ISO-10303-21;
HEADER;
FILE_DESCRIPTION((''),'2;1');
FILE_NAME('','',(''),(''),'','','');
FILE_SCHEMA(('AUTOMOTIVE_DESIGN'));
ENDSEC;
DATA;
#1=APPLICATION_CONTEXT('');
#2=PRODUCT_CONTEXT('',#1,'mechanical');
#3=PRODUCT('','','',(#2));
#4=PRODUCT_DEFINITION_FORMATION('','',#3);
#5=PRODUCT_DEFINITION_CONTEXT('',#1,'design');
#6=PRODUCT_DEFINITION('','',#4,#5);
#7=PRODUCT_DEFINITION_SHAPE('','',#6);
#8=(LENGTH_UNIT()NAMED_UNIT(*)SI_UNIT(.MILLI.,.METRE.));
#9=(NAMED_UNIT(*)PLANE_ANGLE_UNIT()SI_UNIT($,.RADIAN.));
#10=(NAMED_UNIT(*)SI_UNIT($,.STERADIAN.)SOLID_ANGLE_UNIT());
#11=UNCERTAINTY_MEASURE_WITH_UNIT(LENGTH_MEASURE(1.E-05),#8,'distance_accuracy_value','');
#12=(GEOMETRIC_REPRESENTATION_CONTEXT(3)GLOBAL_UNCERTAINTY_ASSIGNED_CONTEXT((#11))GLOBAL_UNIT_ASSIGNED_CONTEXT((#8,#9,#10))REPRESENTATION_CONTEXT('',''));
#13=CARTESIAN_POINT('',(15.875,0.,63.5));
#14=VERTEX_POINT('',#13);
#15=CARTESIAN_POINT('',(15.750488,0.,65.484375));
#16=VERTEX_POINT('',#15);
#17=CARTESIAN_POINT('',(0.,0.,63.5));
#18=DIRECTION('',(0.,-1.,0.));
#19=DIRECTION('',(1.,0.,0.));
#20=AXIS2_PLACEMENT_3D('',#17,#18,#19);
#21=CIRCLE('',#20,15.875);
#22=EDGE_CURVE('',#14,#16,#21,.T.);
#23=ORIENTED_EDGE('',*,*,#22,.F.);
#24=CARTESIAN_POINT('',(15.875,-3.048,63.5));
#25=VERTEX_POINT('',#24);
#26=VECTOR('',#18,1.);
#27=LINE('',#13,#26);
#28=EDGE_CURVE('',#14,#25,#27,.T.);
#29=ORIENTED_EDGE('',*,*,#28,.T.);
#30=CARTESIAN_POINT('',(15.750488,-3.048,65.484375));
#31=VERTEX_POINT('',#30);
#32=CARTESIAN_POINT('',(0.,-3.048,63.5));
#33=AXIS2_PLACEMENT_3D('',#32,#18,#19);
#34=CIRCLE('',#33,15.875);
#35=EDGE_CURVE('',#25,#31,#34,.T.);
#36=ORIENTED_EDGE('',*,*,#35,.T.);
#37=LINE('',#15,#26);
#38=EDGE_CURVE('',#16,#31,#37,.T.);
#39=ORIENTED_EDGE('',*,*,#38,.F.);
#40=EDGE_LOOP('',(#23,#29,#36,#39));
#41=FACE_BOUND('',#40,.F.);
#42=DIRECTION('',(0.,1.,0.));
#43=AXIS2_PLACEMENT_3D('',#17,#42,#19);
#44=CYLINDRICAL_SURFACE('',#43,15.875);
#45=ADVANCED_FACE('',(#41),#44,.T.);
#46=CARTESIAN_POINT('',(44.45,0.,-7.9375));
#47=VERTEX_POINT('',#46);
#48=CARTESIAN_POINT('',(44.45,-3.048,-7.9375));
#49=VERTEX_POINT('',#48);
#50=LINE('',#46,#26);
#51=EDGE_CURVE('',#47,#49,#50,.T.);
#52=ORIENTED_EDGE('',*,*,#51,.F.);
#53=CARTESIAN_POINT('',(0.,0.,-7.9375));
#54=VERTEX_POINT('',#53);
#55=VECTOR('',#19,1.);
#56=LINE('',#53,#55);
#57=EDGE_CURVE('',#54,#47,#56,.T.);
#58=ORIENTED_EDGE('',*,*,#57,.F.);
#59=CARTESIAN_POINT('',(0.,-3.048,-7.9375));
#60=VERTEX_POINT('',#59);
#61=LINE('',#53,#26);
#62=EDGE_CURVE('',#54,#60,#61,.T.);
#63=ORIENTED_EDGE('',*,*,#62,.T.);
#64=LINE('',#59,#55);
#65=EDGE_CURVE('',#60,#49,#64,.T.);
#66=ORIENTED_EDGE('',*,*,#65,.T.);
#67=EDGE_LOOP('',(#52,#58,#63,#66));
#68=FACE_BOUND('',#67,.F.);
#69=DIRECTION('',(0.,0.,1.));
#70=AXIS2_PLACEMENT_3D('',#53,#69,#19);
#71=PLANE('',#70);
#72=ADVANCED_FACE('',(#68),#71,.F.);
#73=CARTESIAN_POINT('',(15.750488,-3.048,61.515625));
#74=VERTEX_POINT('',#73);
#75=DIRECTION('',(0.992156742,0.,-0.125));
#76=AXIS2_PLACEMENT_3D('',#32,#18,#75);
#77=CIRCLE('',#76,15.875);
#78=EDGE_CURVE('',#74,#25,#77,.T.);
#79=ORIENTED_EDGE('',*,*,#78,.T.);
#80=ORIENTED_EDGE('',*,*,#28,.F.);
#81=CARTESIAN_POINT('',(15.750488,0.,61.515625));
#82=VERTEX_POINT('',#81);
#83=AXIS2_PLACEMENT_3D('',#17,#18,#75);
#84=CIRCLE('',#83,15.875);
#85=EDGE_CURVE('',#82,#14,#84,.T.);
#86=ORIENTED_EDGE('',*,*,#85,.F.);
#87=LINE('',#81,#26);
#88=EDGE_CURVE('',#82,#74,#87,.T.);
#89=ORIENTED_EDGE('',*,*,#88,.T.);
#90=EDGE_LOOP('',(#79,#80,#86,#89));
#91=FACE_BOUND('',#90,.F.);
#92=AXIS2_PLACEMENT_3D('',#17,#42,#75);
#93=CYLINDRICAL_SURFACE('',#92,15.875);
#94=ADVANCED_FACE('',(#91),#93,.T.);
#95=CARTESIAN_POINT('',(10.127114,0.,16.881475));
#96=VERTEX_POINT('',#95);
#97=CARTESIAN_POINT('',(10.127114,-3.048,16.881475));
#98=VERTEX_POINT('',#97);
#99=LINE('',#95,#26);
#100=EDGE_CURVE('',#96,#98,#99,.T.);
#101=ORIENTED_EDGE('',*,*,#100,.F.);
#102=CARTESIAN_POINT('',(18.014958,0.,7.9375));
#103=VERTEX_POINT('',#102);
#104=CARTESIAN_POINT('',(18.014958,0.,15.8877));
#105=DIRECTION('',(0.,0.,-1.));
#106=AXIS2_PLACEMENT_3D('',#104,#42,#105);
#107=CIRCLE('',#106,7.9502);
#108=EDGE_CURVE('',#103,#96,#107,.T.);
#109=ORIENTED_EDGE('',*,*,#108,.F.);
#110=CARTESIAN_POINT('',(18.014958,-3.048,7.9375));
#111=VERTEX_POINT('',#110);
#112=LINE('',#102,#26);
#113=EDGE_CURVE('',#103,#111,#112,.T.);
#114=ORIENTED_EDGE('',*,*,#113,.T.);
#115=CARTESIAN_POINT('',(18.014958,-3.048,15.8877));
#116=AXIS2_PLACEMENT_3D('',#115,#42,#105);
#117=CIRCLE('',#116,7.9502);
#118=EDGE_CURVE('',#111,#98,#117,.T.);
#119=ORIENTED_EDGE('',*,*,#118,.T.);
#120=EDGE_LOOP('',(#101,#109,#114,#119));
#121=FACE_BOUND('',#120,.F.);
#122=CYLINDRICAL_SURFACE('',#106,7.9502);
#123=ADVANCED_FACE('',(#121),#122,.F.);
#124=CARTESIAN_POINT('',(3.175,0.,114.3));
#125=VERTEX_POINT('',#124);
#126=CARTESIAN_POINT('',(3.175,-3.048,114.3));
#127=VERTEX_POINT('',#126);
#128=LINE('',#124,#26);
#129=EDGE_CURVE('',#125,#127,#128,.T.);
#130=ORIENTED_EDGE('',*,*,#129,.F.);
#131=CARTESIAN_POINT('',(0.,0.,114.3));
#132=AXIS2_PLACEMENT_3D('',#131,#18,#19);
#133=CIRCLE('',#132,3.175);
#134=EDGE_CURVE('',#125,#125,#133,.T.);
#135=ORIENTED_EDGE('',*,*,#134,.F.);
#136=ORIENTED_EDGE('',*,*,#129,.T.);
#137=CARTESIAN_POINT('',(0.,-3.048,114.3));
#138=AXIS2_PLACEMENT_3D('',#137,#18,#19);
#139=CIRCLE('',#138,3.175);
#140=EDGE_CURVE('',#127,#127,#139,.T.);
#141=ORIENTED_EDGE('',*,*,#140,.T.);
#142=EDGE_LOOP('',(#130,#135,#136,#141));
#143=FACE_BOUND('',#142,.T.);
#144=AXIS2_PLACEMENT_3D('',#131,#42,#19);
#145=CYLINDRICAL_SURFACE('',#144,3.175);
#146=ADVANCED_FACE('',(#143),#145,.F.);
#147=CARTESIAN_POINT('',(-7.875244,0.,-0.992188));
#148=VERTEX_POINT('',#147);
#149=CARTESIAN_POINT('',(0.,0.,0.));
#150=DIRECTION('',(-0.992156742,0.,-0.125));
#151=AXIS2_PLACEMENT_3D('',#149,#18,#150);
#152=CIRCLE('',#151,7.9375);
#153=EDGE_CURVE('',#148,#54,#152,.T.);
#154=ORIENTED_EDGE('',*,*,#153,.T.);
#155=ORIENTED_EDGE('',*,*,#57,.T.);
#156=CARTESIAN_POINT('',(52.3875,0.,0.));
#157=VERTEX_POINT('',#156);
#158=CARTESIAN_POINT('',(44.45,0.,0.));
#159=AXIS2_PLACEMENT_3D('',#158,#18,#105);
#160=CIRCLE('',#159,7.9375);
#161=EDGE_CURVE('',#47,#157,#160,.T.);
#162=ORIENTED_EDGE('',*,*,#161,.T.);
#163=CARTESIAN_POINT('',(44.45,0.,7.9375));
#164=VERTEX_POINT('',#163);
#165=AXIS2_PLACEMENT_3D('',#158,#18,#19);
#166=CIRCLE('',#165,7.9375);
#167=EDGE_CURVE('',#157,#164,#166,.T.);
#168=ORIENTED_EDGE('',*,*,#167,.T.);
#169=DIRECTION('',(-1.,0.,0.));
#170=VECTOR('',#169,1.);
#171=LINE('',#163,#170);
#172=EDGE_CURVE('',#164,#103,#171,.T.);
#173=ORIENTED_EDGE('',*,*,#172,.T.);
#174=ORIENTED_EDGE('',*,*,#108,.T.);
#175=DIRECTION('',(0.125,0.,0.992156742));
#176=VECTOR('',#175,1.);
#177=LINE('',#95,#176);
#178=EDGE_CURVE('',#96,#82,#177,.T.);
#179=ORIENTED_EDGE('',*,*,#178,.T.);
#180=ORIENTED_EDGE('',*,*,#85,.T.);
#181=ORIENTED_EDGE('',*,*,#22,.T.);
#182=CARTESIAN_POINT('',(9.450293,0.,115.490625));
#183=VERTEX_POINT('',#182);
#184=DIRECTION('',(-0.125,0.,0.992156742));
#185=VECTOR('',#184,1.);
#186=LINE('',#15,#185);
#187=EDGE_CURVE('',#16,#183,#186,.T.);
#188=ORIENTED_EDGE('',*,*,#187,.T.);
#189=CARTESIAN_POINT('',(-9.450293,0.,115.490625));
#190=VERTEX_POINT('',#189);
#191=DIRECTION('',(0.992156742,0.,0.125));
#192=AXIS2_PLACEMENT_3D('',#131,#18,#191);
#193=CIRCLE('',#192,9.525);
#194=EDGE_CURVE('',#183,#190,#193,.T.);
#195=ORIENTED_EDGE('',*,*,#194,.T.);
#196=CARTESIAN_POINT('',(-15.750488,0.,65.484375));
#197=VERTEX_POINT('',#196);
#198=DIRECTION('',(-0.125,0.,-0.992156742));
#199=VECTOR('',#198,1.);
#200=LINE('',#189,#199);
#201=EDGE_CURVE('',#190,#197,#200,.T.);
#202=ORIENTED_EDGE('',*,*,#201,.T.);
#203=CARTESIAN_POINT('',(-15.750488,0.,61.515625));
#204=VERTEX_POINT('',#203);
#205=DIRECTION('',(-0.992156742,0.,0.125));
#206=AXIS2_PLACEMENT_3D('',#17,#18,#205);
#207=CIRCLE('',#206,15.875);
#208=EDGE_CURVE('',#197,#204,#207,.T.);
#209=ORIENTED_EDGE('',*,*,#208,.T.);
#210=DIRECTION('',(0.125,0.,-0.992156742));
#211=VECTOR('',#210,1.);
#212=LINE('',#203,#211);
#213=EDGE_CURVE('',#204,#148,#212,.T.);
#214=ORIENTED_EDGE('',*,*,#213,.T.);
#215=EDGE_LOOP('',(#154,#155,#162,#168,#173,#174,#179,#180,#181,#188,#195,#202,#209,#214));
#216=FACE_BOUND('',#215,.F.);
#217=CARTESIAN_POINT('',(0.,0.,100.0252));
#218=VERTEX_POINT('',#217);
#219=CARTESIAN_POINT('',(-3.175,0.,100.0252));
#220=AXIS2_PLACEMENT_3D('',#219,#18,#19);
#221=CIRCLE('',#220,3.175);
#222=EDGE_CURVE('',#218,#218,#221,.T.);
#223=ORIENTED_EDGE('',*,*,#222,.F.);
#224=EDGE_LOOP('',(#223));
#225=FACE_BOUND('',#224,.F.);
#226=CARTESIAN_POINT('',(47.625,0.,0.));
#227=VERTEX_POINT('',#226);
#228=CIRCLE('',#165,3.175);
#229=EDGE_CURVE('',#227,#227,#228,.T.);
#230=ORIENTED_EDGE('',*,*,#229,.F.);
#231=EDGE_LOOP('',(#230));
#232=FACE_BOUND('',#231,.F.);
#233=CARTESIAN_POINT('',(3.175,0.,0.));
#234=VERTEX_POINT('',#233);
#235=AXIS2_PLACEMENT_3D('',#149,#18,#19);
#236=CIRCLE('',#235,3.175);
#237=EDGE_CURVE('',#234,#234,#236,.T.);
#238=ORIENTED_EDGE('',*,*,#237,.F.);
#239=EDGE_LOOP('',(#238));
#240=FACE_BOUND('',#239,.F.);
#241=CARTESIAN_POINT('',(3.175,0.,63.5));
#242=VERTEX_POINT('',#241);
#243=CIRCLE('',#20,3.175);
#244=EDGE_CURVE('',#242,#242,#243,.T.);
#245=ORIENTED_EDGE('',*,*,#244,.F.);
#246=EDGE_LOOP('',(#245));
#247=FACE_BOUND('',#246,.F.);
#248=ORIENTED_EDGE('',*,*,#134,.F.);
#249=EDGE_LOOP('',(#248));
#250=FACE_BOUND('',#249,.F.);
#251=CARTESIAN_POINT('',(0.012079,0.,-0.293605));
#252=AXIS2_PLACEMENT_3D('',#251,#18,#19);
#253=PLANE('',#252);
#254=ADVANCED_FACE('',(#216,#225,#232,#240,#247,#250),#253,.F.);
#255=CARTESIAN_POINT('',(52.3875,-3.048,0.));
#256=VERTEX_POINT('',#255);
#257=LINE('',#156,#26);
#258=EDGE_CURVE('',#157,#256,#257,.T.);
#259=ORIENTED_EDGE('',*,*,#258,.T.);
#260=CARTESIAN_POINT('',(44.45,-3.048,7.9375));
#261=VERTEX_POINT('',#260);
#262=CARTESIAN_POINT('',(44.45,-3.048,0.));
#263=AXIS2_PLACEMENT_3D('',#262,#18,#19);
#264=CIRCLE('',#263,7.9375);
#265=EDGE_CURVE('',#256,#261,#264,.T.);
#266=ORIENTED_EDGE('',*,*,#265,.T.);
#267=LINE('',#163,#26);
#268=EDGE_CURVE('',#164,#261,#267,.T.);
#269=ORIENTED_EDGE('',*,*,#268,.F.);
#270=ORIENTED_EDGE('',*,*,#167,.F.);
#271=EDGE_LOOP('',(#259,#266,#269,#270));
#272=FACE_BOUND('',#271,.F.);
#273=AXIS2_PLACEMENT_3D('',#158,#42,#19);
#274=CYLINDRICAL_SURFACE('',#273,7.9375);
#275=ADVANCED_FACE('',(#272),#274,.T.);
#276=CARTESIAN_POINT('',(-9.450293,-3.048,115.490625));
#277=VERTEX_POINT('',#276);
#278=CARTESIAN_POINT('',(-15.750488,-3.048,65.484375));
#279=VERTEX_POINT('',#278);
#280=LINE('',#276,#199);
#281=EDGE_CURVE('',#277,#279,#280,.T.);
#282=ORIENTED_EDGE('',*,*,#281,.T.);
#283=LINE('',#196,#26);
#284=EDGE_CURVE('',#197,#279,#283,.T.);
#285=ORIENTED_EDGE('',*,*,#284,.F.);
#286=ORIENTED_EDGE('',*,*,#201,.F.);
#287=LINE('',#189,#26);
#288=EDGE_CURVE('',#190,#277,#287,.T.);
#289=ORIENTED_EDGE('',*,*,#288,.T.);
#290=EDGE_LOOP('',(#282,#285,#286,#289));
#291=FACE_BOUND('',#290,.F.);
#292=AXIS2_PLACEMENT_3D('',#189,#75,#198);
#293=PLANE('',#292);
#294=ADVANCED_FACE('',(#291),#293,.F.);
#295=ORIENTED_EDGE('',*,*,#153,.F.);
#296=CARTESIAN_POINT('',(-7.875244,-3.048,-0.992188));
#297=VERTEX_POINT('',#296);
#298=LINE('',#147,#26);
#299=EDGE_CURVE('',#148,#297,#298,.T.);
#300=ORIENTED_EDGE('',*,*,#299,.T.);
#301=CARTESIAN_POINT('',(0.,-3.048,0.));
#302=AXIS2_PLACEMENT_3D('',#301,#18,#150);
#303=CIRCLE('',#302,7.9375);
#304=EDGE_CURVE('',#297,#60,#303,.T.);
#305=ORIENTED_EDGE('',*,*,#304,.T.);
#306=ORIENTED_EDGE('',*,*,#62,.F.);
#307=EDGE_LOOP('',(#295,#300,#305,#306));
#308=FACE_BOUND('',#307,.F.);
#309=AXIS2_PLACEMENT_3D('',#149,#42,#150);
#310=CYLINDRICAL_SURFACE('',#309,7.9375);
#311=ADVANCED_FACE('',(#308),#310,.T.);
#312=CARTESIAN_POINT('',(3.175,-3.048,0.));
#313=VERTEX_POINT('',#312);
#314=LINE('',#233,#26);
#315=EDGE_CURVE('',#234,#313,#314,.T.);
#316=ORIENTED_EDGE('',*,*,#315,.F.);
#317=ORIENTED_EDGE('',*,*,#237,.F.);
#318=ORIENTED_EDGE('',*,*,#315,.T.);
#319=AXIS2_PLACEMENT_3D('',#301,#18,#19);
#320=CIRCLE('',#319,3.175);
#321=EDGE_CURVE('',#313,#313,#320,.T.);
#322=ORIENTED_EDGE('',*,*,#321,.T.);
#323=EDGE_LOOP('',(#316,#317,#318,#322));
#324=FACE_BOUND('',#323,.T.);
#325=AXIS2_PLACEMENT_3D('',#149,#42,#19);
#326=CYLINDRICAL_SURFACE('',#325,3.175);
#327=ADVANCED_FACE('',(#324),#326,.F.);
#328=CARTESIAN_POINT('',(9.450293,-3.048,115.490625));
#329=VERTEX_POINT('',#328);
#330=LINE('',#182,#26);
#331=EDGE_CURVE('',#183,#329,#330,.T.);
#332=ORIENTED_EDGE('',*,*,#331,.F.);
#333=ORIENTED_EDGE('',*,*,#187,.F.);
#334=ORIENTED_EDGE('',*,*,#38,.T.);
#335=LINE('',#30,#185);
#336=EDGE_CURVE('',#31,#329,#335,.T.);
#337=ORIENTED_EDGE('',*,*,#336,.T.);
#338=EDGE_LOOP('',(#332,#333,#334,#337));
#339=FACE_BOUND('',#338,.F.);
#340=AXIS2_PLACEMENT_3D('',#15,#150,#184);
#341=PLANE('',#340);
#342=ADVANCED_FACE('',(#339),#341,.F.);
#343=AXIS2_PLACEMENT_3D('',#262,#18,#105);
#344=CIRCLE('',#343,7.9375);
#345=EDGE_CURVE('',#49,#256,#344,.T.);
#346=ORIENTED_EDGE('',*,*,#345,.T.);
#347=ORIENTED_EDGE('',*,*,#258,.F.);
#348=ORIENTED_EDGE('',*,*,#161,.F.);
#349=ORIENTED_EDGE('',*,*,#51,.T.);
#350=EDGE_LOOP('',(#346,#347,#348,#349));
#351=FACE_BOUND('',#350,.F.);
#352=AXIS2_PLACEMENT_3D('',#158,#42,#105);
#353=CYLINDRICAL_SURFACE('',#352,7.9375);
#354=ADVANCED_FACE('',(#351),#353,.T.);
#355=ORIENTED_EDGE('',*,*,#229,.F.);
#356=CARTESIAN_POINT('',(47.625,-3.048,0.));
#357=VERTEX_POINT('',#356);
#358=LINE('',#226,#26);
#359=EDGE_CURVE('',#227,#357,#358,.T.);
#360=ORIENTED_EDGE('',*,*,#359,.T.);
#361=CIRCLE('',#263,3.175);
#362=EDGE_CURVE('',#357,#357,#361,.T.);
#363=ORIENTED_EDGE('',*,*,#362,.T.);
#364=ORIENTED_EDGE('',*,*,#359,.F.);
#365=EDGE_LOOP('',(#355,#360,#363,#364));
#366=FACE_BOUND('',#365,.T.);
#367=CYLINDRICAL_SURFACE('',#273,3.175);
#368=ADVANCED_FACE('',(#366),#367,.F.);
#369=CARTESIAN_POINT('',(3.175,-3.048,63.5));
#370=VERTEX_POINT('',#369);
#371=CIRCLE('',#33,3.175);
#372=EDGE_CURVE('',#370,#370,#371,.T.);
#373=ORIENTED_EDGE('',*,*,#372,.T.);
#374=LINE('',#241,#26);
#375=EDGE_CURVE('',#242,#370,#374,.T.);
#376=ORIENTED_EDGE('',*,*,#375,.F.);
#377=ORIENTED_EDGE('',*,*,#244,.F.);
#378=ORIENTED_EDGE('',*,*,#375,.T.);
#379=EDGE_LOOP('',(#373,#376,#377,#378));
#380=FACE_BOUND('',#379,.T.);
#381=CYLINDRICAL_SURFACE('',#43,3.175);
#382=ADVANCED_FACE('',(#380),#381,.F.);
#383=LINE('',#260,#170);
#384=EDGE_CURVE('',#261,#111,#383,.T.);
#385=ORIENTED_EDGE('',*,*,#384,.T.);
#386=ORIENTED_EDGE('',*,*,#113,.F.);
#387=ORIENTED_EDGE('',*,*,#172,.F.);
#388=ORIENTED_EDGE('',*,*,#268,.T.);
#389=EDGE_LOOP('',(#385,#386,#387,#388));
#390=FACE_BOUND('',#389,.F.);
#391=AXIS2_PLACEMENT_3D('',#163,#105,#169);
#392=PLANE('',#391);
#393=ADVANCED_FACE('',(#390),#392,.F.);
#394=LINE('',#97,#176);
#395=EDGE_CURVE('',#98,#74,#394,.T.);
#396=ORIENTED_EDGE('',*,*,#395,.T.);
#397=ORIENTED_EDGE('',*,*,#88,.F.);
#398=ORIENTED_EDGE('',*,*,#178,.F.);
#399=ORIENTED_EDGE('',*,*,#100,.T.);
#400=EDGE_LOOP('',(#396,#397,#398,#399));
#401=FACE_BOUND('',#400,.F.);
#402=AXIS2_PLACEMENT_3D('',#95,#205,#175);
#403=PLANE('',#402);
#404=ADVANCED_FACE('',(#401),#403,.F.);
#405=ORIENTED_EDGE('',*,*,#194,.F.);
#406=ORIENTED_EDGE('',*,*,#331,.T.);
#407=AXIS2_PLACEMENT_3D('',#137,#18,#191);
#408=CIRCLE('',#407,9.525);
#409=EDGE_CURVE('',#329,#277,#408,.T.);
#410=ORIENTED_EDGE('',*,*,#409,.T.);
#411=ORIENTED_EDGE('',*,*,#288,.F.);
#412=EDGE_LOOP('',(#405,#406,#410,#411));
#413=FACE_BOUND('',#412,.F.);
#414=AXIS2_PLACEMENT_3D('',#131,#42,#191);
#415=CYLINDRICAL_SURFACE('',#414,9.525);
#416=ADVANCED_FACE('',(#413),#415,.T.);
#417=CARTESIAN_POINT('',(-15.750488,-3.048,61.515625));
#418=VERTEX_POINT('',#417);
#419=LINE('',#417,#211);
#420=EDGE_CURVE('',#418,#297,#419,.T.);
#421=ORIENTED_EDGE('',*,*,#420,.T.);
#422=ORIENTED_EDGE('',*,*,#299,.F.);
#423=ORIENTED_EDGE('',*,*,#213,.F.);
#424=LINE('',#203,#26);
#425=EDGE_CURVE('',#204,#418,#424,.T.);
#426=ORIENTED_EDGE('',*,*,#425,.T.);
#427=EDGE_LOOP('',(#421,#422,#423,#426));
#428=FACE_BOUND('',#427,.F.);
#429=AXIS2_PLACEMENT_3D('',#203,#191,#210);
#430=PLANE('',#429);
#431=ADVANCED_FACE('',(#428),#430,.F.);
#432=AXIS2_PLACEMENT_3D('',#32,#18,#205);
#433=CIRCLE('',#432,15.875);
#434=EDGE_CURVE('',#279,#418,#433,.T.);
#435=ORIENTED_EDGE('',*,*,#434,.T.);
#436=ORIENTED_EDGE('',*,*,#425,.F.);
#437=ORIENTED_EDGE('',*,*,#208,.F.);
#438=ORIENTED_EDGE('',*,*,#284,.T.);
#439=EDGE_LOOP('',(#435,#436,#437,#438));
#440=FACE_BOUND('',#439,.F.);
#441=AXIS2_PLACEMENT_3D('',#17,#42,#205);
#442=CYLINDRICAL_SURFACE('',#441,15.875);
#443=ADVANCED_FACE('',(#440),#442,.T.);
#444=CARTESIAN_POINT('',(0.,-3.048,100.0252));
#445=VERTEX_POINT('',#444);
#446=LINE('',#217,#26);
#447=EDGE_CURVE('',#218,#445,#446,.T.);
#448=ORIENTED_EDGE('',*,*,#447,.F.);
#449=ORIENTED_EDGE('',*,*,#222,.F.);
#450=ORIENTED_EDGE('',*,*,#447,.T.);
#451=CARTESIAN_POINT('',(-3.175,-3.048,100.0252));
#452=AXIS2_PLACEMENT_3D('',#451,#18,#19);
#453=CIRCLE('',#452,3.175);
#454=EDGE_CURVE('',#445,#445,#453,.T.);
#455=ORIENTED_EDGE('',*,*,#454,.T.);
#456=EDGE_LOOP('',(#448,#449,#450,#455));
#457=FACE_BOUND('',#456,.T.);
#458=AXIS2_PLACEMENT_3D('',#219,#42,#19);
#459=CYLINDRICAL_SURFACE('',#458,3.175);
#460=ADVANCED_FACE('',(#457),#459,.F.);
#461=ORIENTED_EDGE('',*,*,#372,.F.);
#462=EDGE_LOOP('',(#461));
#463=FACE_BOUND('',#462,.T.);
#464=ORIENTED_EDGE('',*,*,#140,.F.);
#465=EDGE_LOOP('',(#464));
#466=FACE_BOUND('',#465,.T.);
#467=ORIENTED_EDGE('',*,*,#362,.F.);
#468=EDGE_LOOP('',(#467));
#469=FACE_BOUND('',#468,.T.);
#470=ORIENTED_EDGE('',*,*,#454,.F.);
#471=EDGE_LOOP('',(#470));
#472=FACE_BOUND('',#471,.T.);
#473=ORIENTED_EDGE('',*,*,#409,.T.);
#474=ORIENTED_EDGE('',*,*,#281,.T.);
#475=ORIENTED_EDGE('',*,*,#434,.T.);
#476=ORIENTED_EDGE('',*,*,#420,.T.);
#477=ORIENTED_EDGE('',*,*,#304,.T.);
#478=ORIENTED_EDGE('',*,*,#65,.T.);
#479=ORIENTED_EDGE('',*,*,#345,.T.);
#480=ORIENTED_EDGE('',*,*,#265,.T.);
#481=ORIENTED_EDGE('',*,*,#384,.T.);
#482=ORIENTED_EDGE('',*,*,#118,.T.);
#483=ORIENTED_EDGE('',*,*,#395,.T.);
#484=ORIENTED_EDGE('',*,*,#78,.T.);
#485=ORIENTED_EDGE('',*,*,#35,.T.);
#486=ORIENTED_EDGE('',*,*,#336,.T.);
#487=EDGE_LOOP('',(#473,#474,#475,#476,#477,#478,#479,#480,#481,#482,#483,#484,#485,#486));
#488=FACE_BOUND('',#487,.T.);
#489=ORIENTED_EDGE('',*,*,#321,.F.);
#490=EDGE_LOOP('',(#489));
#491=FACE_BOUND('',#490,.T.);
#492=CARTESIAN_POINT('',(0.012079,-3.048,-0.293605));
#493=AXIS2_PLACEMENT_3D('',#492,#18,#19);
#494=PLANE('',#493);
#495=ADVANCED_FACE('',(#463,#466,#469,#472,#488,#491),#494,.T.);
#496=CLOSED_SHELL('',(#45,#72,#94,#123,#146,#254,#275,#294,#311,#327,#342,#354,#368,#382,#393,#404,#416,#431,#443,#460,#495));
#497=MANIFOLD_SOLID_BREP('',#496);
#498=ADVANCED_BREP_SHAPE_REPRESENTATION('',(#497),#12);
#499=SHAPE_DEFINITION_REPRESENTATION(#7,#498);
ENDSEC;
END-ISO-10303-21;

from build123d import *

# Parameters (mm, degrees)
F0_R     = 3.175
F1_DEPTH = 3.048


# Not quite as in the source:
# - a feature names something its author has since deleted; it is built from what else it names


with BuildPart() as f1:
    # F0 (on Front) → F1 (new body)
    with BuildSketch(Plane.XZ):
        with BuildLine():
            ThreePointArc((0, -7.9375), (5.6126600757, -5.6126600757), (7.9375, 0))
            ThreePointArc((7.9375, 0), (-0.4970693683, 7.9219207452), (-7.8752441368, -0.9921875))
            ThreePointArc((-7.8752441368, -0.9921875), (-5.2501627579, -5.953125), (0, -7.9375))
        make_face()
        Circle(F0_R, mode=Mode.SUBTRACT)
        with BuildLine():
            ThreePointArc((-7.8752441368, -0.9921875), (-0.4970693683, 7.9219207452), (7.9375, 0))
            ThreePointArc((7.9375, 0), (5.6126600757, -5.6126600757), (0, -7.9375))
            Line((0, -7.9375), (44.45, -7.9375))
            ThreePointArc((44.45, -7.9375), (36.5125, 0), (44.45, 7.9375))
            Line((44.45, 7.9375), (18.0149584735, 7.9375))
            ThreePointArc((18.0149584735, 7.9375), (12.0523084735, 10.6291369817), (10.127113946, 16.881475))
            Line((10.127113946, 16.881475), (15.7504882737, 61.515625))
            ThreePointArc((15.7504882737, 61.515625), (0, 47.625), (-15.7504882737, 61.515625))
            Line((-15.7504882737, 61.515625), (-7.8752441368, -0.9921875))
        make_face()
        with BuildLine():
            ThreePointArc((-15.7504882737, 65.484375), (-15.875, 63.5), (-15.7504882737, 61.515625))
            ThreePointArc((-15.7504882737, 61.515625), (0, 47.625), (15.7504882737, 61.515625))
            ThreePointArc((15.7504882737, 61.515625), (15.8438414904, 62.5058612634), (15.875, 63.5))
            ThreePointArc((15.875, 63.5), (15.8438414904, 64.4941387366), (15.7504882737, 65.484375))
            ThreePointArc((15.7504882737, 65.484375), (0, 79.375), (-15.7504882737, 65.484375))
        make_face()
        with Locations((0, 63.5)):
            Circle(F0_R, mode=Mode.SUBTRACT)
        with BuildLine():
            ThreePointArc((44.45, 7.9375), (36.5125, 0), (44.45, -7.9375))
            ThreePointArc((44.45, -7.9375), (50.0626600757, -5.6126600757), (52.3875, 0))
            ThreePointArc((52.3875, 0), (50.0626600757, 5.6126600757), (44.45, 7.9375))
        make_face()
        with Locations((44.45, 0)):
            Circle(F0_R, mode=Mode.SUBTRACT)
        with BuildLine():
            Line((-9.4502929642, 115.490625), (-15.7504882737, 65.484375))
            ThreePointArc((-15.7504882737, 65.484375), (0, 79.375), (15.7504882737, 65.484375))
            Line((15.7504882737, 65.484375), (9.4502929642, 115.490625))
            ThreePointArc((9.4502929642, 115.490625), (9.5063048942, 114.896483242), (9.525, 114.3))
            ThreePointArc((9.525, 114.3), (-0.596483242, 104.7936951058), (-9.4502929642, 115.490625))
        make_face()
        with Locations((-3.175, 100.0252)):
            Circle(F0_R, mode=Mode.SUBTRACT)
        with BuildLine():
            ThreePointArc((9.4502929642, 115.490625), (0, 123.825), (-9.4502929642, 115.490625))
            ThreePointArc((-9.4502929642, 115.490625), (-0.596483242, 104.7936951058), (9.525, 114.3))
            ThreePointArc((9.525, 114.3), (9.5063048942, 114.896483242), (9.4502929642, 115.490625))
        make_face()
        with Locations((0, 114.3)):
            Circle(F0_R, mode=Mode.SUBTRACT)
    extrude(amount=F1_DEPTH)


solid = f1.part
